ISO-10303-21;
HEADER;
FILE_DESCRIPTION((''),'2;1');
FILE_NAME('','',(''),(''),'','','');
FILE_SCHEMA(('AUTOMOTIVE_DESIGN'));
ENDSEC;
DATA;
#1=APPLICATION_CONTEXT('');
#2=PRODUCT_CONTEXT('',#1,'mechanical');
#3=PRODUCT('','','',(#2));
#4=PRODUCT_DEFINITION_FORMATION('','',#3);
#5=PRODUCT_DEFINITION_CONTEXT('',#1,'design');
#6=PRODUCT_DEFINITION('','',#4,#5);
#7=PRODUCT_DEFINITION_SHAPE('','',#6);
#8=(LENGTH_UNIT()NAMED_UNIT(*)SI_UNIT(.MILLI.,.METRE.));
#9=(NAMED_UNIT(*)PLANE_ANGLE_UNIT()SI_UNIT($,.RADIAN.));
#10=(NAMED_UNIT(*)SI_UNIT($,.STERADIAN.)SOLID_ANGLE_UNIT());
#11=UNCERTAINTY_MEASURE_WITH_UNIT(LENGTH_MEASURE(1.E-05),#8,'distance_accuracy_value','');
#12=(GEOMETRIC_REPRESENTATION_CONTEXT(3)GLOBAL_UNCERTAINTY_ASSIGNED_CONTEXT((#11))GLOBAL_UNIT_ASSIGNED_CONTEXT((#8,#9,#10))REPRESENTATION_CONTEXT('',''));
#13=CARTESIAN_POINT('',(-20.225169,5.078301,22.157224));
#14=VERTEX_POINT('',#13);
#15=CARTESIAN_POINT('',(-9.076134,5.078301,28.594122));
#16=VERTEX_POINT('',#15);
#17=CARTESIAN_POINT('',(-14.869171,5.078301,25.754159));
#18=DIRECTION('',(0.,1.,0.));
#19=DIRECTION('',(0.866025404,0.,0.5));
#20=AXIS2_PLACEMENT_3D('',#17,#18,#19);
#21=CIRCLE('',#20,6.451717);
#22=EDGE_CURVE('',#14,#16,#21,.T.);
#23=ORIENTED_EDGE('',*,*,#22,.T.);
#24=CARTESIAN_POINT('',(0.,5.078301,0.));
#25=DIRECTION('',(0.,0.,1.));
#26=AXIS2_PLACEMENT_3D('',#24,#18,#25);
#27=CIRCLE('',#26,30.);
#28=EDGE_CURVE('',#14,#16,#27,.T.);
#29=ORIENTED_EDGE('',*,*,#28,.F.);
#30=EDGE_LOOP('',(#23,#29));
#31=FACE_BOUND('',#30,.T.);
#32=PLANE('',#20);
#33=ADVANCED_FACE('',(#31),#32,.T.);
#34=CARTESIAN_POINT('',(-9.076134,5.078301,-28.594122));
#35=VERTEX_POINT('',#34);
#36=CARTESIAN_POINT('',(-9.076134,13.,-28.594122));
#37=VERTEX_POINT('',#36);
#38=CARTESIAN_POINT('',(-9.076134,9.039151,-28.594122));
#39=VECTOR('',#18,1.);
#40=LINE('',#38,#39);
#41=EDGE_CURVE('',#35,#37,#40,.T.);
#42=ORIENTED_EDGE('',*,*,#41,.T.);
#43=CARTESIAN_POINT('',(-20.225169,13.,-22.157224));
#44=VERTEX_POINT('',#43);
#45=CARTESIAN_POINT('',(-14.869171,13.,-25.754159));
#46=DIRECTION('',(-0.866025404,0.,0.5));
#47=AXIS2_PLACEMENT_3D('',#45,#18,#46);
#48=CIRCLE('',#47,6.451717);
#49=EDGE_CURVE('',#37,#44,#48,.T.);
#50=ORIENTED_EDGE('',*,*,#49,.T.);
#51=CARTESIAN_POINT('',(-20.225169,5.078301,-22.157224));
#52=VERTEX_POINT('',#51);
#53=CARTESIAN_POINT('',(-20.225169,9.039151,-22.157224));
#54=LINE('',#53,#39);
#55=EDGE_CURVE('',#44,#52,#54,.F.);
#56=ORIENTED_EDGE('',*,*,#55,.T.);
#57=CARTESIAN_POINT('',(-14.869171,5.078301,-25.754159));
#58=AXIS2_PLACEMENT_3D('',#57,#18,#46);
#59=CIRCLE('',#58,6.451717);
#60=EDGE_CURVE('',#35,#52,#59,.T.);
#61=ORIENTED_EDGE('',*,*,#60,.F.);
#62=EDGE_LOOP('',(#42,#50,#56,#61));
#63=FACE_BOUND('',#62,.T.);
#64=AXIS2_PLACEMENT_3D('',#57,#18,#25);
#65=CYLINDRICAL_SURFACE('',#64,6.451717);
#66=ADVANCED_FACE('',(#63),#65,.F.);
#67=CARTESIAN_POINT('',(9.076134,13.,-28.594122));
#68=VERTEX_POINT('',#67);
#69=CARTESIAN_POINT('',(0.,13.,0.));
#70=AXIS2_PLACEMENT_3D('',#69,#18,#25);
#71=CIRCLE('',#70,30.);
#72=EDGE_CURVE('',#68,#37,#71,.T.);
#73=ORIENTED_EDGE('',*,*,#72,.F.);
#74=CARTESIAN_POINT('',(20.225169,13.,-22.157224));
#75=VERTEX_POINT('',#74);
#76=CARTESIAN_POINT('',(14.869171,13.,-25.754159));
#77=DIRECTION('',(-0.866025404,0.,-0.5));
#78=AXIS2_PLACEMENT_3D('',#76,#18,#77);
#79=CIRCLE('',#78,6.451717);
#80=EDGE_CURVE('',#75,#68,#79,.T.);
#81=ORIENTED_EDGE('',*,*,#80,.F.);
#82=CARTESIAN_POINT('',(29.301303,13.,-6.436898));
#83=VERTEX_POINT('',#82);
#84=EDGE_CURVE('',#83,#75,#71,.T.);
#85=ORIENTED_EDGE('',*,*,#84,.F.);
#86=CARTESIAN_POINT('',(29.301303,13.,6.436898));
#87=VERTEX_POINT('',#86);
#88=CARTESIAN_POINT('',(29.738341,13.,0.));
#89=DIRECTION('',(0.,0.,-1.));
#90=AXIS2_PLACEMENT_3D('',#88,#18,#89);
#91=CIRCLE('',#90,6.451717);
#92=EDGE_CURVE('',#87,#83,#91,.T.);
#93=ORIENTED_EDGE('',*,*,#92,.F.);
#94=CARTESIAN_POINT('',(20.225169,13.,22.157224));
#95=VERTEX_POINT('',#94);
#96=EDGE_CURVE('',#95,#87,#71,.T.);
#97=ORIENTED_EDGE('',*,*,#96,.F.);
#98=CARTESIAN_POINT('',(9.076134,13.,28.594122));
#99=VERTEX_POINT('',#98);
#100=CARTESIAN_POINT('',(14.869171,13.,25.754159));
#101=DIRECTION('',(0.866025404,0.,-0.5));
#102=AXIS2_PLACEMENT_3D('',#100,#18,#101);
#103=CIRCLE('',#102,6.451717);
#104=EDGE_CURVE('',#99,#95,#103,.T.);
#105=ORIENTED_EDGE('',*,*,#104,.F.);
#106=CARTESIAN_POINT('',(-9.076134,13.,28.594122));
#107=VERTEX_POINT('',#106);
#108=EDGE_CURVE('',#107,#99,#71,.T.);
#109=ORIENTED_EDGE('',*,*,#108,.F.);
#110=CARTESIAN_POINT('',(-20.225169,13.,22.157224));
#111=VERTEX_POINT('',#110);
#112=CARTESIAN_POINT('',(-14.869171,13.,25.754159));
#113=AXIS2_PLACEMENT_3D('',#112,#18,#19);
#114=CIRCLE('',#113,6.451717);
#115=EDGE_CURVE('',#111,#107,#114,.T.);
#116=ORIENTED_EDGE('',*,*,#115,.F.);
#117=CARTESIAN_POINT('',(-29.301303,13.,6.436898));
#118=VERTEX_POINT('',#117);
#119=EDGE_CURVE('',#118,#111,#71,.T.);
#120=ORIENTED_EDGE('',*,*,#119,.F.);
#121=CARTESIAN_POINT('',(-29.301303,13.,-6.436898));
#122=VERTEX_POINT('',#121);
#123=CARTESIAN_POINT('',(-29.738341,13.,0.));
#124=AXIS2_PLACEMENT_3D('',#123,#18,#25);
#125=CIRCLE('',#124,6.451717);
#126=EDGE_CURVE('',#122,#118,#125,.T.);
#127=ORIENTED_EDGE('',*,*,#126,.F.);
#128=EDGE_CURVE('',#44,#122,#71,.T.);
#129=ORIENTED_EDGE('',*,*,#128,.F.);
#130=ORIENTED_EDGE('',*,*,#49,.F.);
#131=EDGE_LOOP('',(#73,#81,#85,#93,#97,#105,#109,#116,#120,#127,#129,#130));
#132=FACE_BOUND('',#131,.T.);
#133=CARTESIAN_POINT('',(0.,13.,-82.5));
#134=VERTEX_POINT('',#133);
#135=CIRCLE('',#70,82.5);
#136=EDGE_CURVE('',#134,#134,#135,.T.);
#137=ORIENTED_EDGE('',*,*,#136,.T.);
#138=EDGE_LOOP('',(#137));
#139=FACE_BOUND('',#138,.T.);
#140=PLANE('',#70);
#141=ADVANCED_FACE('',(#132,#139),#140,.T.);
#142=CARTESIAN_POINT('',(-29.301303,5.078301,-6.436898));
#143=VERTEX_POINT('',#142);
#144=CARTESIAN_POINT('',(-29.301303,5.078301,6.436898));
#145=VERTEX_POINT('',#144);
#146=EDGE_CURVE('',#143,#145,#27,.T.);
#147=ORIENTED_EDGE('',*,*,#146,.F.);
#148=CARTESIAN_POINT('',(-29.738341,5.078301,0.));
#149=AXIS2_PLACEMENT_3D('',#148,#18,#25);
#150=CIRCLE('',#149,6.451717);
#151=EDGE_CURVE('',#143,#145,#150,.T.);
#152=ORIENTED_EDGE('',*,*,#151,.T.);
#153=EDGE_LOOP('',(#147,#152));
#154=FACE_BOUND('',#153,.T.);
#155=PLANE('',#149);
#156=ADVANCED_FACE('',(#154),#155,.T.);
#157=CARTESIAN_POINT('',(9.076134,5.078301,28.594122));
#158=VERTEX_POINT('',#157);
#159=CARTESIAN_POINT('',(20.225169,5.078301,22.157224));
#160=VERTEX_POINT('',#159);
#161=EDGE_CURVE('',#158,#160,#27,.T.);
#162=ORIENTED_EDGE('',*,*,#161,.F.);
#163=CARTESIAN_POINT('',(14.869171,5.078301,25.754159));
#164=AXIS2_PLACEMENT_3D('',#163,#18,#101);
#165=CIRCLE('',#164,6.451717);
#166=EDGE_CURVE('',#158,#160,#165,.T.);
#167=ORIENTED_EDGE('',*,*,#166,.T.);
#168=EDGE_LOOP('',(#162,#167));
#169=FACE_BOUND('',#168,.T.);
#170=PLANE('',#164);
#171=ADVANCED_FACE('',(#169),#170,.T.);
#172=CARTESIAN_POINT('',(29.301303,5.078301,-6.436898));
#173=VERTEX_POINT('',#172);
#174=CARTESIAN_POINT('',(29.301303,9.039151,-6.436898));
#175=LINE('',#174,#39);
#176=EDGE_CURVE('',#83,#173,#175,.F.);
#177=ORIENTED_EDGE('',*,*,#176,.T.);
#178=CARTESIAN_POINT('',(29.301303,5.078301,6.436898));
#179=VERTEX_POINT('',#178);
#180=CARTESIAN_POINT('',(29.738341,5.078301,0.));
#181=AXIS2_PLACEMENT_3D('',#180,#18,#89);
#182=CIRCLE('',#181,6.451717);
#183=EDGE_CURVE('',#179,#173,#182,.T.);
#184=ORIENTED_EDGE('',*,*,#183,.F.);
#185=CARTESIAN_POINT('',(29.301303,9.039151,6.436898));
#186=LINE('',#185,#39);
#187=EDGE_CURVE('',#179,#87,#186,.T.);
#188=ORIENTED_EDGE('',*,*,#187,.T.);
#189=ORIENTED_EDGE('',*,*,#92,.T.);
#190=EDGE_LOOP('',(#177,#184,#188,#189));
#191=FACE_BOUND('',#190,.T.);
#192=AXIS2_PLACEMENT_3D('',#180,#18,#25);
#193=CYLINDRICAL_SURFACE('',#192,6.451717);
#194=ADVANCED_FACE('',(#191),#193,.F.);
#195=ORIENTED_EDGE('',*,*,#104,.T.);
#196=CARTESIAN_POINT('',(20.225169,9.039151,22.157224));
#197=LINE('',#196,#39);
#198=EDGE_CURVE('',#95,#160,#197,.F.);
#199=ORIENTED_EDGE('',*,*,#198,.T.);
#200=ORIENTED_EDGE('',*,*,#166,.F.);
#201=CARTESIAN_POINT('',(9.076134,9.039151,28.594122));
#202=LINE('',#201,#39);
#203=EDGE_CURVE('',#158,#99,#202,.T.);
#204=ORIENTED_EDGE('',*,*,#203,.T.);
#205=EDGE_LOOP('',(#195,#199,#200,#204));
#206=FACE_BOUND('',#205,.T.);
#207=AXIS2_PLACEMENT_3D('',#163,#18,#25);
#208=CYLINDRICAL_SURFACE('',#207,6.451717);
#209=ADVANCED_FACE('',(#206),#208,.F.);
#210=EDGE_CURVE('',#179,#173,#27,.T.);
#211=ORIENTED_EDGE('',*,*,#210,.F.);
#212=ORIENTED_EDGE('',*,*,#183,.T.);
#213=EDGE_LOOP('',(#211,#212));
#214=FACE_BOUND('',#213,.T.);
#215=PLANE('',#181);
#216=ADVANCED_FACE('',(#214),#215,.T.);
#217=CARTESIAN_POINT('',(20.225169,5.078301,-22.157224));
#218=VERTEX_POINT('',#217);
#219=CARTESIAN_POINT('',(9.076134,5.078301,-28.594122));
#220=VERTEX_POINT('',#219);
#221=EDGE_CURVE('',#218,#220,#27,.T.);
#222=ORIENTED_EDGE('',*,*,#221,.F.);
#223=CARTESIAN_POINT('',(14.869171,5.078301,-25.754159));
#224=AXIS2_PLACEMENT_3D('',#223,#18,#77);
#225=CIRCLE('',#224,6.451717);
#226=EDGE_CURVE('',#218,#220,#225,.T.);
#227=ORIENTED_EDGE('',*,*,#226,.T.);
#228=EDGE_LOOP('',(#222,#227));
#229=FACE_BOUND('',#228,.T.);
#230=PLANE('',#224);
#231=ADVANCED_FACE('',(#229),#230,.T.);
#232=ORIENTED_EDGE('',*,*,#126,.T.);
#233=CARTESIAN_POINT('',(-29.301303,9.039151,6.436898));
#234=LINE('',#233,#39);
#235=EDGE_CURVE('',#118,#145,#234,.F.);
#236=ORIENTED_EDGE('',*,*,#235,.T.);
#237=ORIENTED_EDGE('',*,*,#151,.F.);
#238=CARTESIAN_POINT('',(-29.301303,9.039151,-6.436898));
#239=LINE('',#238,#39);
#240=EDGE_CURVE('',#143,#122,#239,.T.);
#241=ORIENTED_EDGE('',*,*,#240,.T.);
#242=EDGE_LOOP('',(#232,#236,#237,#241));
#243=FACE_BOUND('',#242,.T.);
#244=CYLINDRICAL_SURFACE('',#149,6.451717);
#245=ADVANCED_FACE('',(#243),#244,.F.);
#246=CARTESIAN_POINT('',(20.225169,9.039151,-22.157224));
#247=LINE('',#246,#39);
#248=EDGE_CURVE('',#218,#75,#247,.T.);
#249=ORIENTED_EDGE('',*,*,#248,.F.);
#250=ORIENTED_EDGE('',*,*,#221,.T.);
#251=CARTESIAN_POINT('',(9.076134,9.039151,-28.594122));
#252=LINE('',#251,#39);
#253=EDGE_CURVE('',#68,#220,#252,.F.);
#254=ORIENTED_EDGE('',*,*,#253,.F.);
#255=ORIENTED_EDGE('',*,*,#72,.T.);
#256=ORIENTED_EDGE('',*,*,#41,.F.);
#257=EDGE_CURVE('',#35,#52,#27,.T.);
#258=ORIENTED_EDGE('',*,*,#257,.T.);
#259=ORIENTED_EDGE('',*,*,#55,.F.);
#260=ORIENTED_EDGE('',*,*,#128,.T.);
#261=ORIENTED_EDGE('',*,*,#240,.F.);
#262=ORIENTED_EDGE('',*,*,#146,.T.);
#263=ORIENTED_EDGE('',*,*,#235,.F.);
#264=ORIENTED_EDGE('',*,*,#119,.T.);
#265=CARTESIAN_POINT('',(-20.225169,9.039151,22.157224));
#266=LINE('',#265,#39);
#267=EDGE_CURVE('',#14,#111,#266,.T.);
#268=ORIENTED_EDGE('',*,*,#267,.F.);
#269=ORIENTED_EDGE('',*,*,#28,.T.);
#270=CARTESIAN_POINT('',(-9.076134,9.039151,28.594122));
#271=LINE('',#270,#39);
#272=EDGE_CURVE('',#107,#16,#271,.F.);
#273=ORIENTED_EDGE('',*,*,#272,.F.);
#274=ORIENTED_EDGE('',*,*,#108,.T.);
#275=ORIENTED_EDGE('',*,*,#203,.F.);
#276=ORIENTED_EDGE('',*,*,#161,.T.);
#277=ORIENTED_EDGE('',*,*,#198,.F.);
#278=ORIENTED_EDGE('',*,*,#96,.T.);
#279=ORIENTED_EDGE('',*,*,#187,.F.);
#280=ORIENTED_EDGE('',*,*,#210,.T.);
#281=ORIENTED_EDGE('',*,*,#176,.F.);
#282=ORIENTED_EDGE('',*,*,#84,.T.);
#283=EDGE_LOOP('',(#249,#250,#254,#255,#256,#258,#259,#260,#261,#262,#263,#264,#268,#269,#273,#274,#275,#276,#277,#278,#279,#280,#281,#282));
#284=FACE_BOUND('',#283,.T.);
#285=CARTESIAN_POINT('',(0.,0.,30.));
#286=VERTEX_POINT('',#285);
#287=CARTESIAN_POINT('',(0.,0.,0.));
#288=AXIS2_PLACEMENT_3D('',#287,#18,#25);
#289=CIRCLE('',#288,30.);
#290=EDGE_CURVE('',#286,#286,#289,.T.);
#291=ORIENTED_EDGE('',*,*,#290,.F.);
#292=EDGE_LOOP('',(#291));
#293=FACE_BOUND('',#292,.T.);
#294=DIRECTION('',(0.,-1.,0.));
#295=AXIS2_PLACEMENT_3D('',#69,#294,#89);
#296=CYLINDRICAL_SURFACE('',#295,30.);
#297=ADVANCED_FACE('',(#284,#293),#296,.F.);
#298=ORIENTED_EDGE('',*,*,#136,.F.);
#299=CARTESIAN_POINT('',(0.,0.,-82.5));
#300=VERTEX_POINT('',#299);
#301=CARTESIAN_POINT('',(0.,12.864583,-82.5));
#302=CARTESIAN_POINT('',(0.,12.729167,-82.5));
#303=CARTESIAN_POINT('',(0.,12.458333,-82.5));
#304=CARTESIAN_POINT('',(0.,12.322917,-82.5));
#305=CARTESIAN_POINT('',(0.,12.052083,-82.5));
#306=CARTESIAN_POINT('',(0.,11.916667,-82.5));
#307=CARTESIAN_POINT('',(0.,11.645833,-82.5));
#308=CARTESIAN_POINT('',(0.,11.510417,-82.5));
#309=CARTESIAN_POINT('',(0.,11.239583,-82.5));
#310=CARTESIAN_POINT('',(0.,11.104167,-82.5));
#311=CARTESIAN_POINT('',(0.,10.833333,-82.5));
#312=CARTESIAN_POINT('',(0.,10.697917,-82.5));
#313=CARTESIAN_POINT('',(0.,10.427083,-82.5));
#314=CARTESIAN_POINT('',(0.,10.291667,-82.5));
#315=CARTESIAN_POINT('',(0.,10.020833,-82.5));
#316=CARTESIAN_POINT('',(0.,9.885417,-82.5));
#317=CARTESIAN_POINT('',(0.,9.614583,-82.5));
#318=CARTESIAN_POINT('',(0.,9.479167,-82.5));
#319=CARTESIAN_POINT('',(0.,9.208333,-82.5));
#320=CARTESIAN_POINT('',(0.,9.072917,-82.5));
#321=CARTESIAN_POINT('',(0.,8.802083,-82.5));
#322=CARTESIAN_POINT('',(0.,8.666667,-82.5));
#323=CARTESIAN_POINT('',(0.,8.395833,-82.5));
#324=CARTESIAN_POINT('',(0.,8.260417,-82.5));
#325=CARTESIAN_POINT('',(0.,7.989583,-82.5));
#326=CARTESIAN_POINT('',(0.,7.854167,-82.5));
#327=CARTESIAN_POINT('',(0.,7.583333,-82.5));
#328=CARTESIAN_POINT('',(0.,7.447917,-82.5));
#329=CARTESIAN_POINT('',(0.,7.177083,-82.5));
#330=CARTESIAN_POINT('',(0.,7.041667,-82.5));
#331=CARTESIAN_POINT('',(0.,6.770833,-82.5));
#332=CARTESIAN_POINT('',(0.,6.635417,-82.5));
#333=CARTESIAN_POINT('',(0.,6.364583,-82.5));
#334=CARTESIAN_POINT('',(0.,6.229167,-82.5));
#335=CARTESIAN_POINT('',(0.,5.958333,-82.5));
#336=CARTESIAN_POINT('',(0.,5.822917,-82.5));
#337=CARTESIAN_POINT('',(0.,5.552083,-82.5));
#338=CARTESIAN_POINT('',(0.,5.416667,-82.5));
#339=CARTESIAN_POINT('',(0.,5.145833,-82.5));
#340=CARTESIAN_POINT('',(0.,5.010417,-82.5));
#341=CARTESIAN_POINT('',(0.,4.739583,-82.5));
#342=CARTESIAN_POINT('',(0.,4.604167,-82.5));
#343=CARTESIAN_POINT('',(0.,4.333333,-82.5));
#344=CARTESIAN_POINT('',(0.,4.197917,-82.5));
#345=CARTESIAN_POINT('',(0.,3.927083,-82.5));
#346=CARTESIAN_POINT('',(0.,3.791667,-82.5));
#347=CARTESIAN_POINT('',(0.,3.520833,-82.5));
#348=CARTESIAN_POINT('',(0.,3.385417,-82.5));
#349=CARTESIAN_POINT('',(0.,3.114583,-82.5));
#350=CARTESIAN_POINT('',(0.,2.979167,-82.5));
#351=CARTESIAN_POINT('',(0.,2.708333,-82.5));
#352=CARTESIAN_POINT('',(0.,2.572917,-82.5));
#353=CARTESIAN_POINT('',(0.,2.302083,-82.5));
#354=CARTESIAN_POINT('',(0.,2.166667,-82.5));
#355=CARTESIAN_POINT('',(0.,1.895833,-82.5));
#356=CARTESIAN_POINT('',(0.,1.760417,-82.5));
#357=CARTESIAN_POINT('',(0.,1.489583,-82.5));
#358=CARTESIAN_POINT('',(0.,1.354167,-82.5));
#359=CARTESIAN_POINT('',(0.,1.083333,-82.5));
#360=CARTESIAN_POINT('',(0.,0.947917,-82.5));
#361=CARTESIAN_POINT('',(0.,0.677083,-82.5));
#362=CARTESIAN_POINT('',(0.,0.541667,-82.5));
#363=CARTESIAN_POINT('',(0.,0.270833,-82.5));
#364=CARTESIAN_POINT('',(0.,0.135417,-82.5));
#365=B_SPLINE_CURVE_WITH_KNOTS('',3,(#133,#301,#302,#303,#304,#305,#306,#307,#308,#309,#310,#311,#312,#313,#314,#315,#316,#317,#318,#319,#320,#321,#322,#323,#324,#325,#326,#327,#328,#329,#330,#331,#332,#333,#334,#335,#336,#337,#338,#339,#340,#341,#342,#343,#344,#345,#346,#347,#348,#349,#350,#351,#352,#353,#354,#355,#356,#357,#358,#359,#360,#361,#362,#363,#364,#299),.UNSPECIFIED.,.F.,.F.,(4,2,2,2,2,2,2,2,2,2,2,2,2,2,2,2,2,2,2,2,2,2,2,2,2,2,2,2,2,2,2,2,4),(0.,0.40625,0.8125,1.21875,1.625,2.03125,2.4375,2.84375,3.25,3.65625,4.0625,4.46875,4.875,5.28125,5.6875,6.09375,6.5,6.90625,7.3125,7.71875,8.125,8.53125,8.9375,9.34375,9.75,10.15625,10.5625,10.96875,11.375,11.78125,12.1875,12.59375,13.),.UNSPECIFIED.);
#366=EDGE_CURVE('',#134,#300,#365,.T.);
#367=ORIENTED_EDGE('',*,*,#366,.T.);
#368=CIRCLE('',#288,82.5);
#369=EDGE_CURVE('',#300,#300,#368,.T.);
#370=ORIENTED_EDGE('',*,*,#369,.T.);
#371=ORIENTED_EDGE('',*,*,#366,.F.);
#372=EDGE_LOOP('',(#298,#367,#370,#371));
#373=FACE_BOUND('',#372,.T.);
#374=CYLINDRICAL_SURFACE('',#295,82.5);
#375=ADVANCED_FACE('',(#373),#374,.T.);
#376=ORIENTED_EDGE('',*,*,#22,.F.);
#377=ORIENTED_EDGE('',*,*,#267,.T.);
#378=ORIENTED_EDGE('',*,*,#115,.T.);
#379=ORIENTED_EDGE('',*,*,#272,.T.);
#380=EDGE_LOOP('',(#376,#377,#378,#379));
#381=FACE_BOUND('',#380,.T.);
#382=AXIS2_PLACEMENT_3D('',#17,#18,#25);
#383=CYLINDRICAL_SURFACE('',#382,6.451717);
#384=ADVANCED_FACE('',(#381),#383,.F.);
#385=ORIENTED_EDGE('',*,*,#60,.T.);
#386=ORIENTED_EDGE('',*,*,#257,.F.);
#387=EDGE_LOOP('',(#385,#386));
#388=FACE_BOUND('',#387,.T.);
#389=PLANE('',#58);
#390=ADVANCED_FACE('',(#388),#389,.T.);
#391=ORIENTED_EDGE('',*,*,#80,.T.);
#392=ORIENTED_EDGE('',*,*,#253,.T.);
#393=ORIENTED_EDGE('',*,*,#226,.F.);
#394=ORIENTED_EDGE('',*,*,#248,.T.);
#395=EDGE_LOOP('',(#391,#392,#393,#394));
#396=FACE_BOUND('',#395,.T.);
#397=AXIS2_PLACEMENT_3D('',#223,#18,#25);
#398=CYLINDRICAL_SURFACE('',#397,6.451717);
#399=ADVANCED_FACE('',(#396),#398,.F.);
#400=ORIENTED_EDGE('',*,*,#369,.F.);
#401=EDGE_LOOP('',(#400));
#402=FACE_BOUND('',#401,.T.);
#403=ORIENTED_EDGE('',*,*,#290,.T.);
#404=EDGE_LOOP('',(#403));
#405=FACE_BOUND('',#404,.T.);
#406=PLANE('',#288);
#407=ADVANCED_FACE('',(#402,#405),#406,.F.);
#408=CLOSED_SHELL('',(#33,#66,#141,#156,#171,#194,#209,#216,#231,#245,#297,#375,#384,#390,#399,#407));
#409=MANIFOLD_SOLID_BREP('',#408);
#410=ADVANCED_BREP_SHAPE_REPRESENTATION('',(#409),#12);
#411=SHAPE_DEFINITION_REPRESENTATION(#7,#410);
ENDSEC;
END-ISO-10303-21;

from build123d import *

# Parameters (mm, degrees)
SKETCH1_R           = 82.5
BOSS_EXTRUDE1_DEPTH = 13
SKETCH2_R           = 30
CUT_EXTRUDE1_DEPTH  = 118.394633608
SKETCH3_R           = 6.451717482
CUT_EXTRUDE2_DEPTH  = 7.9216986
CIRPATTERN1_COUNT   = 6


with BuildPart() as part:
    # Sketch1 → Boss-Extrude1 (new body)
    with BuildSketch(Plane(origin=(0, 0, 0), x_dir=(1, 0, 0), z_dir=(0, 1, 0))):
        Circle(SKETCH1_R)
    extrude(amount=BOSS_EXTRUDE1_DEPTH)

    # Sketch2 → Cut-Extrude1 (cut, through all)
    with BuildSketch(Plane(origin=(0, 0, 0), x_dir=(1, 0, 0), z_dir=(0, 1, 0))):
        Circle(SKETCH2_R)
    extrude(amount=CUT_EXTRUDE1_DEPTH, mode=Mode.SUBTRACT)

    # Sketch3 → Cut-Extrude2 (cut)
    with BuildSketch(Plane(origin=(0, 13, 0), x_dir=(1, 0, 0), z_dir=(0, 1, 0))):
        with Locations((-29.738341357, 0)):
            Circle(SKETCH3_R)
    cut_extrude2 = extrude(amount=-CUT_EXTRUDE2_DEPTH, mode=Mode.SUBTRACT)

    # CirPattern1: Cut-Extrude2 ×6 about axis
    cirpattern1_axis = Axis((0, 0, 0), (0, 1, 0))
    for i in range(1, CIRPATTERN1_COUNT):
        add(cut_extrude2.rotate(cirpattern1_axis, i * 360 / CIRPATTERN1_COUNT), mode=Mode.SUBTRACT)


solid = part.part
